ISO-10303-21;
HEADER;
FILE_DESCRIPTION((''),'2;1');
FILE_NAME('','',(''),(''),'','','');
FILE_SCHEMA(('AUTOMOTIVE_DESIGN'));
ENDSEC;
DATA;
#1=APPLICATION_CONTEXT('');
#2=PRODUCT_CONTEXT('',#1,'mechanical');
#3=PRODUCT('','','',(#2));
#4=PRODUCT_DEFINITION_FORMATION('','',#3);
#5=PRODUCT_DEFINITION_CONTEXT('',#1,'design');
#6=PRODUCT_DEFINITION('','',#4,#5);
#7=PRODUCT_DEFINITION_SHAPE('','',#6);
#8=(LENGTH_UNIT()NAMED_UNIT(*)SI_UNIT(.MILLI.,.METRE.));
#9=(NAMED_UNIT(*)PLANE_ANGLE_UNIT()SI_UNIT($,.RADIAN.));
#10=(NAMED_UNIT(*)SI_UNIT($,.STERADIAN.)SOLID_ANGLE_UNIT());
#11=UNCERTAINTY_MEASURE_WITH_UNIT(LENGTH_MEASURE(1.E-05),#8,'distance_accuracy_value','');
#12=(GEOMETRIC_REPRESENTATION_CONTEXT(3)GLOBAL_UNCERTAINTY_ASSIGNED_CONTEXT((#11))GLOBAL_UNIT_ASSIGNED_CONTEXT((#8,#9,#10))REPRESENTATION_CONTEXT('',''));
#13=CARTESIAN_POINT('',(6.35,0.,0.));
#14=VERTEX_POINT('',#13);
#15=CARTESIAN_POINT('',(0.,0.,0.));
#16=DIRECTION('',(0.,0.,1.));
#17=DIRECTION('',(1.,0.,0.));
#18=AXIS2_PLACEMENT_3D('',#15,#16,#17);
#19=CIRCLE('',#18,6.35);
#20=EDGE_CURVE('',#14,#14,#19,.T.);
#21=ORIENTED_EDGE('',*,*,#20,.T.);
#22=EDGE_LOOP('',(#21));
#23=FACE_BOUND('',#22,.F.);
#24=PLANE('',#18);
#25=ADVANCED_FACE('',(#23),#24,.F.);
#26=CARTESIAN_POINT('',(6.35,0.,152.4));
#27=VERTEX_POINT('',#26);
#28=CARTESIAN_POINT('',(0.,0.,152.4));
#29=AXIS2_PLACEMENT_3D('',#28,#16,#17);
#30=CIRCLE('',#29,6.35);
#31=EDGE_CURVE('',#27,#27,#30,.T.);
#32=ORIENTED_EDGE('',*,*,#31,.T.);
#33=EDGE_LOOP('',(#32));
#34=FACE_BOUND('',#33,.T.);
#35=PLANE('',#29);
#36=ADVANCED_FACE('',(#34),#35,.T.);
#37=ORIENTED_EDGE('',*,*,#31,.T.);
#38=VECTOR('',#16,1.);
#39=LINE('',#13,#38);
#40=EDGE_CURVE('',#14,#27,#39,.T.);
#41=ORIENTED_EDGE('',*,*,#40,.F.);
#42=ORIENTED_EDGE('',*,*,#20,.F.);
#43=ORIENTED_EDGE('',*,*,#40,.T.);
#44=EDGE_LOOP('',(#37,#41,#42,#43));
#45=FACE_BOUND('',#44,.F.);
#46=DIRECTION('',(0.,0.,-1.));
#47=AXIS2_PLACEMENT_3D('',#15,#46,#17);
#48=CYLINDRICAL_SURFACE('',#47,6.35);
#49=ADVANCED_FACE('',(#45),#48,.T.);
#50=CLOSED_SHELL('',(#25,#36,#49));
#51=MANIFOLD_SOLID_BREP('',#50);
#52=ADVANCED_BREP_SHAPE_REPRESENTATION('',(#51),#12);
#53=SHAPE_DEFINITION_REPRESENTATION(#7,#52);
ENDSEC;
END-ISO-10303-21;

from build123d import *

# Parameters (mm, degrees)
F1_R     = 6.35
F2_DEPTH = 152.4


# Not quite as in the source:
# - a variable given as a bare number and used for a length is read in inches; the dataset says mm whatever the document's units were


with BuildPart() as f2:
    # F1 (on Top) → F2 (new body)
    with BuildSketch(Plane.XY):
        Circle(F1_R)
    extrude(amount=F2_DEPTH)


solid = f2.part
